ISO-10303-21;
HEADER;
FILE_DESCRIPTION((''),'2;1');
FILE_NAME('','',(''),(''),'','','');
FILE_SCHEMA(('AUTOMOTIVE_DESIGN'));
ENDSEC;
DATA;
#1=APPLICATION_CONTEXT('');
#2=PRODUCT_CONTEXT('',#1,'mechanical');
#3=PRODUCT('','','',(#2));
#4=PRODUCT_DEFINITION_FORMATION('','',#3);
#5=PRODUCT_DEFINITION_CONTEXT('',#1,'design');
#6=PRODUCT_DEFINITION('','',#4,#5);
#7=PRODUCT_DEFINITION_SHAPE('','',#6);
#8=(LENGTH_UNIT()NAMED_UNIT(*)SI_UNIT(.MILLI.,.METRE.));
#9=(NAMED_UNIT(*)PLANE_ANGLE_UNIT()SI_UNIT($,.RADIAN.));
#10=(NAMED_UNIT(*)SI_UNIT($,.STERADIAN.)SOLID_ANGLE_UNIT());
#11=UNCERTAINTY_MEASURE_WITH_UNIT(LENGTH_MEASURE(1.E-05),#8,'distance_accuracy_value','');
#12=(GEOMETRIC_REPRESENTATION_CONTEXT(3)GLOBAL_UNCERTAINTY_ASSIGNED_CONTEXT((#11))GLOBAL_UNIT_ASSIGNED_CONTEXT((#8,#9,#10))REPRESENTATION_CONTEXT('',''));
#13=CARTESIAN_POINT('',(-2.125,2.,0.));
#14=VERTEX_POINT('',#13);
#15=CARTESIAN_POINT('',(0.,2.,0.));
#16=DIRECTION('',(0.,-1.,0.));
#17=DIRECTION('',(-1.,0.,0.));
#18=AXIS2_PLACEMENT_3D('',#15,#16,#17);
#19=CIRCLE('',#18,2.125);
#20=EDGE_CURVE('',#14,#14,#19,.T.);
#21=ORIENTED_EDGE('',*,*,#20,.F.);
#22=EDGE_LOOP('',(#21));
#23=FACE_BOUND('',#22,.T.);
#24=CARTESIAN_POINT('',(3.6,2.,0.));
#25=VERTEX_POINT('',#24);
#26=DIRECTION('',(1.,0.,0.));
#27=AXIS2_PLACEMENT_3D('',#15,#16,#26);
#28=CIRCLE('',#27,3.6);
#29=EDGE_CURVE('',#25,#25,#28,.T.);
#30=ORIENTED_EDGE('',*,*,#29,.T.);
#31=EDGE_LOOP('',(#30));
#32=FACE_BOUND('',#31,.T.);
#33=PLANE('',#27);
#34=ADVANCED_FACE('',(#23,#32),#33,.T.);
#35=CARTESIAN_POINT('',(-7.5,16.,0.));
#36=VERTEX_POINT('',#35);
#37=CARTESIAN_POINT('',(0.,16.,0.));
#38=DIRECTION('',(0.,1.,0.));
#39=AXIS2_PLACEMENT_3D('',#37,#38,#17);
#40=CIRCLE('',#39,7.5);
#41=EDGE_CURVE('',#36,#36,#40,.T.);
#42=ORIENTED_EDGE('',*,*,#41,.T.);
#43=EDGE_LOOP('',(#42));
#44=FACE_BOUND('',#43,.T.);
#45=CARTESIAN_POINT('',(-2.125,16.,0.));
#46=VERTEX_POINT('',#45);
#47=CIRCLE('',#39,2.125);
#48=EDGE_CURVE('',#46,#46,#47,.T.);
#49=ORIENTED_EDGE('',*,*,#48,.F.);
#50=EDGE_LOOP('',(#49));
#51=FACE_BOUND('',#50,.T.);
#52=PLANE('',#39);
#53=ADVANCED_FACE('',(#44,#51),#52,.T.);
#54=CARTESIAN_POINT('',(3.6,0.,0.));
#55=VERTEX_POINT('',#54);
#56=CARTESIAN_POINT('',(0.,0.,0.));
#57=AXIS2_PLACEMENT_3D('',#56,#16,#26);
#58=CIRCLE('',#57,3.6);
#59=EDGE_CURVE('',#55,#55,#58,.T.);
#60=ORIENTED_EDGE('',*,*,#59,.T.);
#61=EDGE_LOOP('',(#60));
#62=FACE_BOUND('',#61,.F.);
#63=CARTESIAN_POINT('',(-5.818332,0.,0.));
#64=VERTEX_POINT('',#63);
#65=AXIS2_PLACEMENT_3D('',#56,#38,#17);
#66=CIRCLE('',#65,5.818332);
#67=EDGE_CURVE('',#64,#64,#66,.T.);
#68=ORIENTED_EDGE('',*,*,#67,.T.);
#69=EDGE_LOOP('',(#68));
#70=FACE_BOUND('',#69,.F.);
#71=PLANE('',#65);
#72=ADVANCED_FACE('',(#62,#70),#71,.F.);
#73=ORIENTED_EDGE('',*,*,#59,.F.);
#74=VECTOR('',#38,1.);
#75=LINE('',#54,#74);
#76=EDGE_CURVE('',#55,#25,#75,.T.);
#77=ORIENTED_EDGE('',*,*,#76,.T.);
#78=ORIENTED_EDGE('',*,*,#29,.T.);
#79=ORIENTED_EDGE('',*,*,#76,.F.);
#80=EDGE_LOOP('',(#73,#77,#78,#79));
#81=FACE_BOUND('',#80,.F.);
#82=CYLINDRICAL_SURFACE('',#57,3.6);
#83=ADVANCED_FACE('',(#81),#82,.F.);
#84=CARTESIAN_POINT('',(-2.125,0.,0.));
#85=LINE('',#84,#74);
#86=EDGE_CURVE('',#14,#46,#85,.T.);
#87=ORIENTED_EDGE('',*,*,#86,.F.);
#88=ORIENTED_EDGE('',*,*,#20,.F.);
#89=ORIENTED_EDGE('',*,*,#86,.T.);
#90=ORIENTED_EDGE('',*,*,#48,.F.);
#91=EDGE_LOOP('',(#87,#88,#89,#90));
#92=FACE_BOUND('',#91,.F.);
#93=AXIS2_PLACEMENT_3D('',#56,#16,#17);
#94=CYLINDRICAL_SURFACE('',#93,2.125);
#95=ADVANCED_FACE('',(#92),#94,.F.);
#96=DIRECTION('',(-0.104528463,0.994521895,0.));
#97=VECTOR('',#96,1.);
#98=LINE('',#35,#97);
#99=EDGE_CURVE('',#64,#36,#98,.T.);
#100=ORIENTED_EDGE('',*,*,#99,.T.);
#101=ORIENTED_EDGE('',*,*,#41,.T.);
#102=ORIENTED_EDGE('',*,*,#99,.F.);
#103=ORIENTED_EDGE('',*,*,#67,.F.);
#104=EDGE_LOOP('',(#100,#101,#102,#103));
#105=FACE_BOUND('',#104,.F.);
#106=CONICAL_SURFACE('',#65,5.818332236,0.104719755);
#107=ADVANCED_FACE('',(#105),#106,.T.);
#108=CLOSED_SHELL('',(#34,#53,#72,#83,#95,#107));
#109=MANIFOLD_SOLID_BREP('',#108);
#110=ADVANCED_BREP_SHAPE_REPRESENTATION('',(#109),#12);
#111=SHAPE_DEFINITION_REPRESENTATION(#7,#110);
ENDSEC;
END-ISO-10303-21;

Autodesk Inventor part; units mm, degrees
ref_plane "YZ Plane" through (0, 0, 0) normal (1, 0, 0) x (0, 1, 0)
ref_plane "XZ Plane" through (0, 0, 0) normal (0, 1, 0) x (-1, 0, 0)
ref_plane "XY Plane" through (0, 0, 0) normal (0, 0, 1) x (1, 0, 0)
sketch "Esquisse3" plane through (0, 0, 0) normal (0, 1, 0) x (-1, 0, 0)
  circle A0 centre (0, 0) radius 2.125
  circle A1 centre (0, 0) radius 7.5
  dimension "d12" = 4.25
  dimension "d13" = 15
extrude "Extrusion3" add sketch "Esquisse3" along normal blind 16
draft "Dépouille de face1" angle 6 pull direction (0, -1, 0) faces at (-7.4757, 10.6667, -0.6035) fixed edges at (7.5, 16, 0)
sketch "Esquisse4" plane through (0, 16, 0) normal (0, 1, 0) x (1, 0, 0)
  point P0 (0, 0)
sketch "Esquisse6" plane through (0, 0, 0) normal (0, -1, 0) x (1, 0, 0)
  circle A0 centre (0, 0) radius 3.6
  dimension "d22" = 7.2
extrude "Extrusion5" cut sketch "Esquisse6" against normal blind 2
properties part number "cleat"
